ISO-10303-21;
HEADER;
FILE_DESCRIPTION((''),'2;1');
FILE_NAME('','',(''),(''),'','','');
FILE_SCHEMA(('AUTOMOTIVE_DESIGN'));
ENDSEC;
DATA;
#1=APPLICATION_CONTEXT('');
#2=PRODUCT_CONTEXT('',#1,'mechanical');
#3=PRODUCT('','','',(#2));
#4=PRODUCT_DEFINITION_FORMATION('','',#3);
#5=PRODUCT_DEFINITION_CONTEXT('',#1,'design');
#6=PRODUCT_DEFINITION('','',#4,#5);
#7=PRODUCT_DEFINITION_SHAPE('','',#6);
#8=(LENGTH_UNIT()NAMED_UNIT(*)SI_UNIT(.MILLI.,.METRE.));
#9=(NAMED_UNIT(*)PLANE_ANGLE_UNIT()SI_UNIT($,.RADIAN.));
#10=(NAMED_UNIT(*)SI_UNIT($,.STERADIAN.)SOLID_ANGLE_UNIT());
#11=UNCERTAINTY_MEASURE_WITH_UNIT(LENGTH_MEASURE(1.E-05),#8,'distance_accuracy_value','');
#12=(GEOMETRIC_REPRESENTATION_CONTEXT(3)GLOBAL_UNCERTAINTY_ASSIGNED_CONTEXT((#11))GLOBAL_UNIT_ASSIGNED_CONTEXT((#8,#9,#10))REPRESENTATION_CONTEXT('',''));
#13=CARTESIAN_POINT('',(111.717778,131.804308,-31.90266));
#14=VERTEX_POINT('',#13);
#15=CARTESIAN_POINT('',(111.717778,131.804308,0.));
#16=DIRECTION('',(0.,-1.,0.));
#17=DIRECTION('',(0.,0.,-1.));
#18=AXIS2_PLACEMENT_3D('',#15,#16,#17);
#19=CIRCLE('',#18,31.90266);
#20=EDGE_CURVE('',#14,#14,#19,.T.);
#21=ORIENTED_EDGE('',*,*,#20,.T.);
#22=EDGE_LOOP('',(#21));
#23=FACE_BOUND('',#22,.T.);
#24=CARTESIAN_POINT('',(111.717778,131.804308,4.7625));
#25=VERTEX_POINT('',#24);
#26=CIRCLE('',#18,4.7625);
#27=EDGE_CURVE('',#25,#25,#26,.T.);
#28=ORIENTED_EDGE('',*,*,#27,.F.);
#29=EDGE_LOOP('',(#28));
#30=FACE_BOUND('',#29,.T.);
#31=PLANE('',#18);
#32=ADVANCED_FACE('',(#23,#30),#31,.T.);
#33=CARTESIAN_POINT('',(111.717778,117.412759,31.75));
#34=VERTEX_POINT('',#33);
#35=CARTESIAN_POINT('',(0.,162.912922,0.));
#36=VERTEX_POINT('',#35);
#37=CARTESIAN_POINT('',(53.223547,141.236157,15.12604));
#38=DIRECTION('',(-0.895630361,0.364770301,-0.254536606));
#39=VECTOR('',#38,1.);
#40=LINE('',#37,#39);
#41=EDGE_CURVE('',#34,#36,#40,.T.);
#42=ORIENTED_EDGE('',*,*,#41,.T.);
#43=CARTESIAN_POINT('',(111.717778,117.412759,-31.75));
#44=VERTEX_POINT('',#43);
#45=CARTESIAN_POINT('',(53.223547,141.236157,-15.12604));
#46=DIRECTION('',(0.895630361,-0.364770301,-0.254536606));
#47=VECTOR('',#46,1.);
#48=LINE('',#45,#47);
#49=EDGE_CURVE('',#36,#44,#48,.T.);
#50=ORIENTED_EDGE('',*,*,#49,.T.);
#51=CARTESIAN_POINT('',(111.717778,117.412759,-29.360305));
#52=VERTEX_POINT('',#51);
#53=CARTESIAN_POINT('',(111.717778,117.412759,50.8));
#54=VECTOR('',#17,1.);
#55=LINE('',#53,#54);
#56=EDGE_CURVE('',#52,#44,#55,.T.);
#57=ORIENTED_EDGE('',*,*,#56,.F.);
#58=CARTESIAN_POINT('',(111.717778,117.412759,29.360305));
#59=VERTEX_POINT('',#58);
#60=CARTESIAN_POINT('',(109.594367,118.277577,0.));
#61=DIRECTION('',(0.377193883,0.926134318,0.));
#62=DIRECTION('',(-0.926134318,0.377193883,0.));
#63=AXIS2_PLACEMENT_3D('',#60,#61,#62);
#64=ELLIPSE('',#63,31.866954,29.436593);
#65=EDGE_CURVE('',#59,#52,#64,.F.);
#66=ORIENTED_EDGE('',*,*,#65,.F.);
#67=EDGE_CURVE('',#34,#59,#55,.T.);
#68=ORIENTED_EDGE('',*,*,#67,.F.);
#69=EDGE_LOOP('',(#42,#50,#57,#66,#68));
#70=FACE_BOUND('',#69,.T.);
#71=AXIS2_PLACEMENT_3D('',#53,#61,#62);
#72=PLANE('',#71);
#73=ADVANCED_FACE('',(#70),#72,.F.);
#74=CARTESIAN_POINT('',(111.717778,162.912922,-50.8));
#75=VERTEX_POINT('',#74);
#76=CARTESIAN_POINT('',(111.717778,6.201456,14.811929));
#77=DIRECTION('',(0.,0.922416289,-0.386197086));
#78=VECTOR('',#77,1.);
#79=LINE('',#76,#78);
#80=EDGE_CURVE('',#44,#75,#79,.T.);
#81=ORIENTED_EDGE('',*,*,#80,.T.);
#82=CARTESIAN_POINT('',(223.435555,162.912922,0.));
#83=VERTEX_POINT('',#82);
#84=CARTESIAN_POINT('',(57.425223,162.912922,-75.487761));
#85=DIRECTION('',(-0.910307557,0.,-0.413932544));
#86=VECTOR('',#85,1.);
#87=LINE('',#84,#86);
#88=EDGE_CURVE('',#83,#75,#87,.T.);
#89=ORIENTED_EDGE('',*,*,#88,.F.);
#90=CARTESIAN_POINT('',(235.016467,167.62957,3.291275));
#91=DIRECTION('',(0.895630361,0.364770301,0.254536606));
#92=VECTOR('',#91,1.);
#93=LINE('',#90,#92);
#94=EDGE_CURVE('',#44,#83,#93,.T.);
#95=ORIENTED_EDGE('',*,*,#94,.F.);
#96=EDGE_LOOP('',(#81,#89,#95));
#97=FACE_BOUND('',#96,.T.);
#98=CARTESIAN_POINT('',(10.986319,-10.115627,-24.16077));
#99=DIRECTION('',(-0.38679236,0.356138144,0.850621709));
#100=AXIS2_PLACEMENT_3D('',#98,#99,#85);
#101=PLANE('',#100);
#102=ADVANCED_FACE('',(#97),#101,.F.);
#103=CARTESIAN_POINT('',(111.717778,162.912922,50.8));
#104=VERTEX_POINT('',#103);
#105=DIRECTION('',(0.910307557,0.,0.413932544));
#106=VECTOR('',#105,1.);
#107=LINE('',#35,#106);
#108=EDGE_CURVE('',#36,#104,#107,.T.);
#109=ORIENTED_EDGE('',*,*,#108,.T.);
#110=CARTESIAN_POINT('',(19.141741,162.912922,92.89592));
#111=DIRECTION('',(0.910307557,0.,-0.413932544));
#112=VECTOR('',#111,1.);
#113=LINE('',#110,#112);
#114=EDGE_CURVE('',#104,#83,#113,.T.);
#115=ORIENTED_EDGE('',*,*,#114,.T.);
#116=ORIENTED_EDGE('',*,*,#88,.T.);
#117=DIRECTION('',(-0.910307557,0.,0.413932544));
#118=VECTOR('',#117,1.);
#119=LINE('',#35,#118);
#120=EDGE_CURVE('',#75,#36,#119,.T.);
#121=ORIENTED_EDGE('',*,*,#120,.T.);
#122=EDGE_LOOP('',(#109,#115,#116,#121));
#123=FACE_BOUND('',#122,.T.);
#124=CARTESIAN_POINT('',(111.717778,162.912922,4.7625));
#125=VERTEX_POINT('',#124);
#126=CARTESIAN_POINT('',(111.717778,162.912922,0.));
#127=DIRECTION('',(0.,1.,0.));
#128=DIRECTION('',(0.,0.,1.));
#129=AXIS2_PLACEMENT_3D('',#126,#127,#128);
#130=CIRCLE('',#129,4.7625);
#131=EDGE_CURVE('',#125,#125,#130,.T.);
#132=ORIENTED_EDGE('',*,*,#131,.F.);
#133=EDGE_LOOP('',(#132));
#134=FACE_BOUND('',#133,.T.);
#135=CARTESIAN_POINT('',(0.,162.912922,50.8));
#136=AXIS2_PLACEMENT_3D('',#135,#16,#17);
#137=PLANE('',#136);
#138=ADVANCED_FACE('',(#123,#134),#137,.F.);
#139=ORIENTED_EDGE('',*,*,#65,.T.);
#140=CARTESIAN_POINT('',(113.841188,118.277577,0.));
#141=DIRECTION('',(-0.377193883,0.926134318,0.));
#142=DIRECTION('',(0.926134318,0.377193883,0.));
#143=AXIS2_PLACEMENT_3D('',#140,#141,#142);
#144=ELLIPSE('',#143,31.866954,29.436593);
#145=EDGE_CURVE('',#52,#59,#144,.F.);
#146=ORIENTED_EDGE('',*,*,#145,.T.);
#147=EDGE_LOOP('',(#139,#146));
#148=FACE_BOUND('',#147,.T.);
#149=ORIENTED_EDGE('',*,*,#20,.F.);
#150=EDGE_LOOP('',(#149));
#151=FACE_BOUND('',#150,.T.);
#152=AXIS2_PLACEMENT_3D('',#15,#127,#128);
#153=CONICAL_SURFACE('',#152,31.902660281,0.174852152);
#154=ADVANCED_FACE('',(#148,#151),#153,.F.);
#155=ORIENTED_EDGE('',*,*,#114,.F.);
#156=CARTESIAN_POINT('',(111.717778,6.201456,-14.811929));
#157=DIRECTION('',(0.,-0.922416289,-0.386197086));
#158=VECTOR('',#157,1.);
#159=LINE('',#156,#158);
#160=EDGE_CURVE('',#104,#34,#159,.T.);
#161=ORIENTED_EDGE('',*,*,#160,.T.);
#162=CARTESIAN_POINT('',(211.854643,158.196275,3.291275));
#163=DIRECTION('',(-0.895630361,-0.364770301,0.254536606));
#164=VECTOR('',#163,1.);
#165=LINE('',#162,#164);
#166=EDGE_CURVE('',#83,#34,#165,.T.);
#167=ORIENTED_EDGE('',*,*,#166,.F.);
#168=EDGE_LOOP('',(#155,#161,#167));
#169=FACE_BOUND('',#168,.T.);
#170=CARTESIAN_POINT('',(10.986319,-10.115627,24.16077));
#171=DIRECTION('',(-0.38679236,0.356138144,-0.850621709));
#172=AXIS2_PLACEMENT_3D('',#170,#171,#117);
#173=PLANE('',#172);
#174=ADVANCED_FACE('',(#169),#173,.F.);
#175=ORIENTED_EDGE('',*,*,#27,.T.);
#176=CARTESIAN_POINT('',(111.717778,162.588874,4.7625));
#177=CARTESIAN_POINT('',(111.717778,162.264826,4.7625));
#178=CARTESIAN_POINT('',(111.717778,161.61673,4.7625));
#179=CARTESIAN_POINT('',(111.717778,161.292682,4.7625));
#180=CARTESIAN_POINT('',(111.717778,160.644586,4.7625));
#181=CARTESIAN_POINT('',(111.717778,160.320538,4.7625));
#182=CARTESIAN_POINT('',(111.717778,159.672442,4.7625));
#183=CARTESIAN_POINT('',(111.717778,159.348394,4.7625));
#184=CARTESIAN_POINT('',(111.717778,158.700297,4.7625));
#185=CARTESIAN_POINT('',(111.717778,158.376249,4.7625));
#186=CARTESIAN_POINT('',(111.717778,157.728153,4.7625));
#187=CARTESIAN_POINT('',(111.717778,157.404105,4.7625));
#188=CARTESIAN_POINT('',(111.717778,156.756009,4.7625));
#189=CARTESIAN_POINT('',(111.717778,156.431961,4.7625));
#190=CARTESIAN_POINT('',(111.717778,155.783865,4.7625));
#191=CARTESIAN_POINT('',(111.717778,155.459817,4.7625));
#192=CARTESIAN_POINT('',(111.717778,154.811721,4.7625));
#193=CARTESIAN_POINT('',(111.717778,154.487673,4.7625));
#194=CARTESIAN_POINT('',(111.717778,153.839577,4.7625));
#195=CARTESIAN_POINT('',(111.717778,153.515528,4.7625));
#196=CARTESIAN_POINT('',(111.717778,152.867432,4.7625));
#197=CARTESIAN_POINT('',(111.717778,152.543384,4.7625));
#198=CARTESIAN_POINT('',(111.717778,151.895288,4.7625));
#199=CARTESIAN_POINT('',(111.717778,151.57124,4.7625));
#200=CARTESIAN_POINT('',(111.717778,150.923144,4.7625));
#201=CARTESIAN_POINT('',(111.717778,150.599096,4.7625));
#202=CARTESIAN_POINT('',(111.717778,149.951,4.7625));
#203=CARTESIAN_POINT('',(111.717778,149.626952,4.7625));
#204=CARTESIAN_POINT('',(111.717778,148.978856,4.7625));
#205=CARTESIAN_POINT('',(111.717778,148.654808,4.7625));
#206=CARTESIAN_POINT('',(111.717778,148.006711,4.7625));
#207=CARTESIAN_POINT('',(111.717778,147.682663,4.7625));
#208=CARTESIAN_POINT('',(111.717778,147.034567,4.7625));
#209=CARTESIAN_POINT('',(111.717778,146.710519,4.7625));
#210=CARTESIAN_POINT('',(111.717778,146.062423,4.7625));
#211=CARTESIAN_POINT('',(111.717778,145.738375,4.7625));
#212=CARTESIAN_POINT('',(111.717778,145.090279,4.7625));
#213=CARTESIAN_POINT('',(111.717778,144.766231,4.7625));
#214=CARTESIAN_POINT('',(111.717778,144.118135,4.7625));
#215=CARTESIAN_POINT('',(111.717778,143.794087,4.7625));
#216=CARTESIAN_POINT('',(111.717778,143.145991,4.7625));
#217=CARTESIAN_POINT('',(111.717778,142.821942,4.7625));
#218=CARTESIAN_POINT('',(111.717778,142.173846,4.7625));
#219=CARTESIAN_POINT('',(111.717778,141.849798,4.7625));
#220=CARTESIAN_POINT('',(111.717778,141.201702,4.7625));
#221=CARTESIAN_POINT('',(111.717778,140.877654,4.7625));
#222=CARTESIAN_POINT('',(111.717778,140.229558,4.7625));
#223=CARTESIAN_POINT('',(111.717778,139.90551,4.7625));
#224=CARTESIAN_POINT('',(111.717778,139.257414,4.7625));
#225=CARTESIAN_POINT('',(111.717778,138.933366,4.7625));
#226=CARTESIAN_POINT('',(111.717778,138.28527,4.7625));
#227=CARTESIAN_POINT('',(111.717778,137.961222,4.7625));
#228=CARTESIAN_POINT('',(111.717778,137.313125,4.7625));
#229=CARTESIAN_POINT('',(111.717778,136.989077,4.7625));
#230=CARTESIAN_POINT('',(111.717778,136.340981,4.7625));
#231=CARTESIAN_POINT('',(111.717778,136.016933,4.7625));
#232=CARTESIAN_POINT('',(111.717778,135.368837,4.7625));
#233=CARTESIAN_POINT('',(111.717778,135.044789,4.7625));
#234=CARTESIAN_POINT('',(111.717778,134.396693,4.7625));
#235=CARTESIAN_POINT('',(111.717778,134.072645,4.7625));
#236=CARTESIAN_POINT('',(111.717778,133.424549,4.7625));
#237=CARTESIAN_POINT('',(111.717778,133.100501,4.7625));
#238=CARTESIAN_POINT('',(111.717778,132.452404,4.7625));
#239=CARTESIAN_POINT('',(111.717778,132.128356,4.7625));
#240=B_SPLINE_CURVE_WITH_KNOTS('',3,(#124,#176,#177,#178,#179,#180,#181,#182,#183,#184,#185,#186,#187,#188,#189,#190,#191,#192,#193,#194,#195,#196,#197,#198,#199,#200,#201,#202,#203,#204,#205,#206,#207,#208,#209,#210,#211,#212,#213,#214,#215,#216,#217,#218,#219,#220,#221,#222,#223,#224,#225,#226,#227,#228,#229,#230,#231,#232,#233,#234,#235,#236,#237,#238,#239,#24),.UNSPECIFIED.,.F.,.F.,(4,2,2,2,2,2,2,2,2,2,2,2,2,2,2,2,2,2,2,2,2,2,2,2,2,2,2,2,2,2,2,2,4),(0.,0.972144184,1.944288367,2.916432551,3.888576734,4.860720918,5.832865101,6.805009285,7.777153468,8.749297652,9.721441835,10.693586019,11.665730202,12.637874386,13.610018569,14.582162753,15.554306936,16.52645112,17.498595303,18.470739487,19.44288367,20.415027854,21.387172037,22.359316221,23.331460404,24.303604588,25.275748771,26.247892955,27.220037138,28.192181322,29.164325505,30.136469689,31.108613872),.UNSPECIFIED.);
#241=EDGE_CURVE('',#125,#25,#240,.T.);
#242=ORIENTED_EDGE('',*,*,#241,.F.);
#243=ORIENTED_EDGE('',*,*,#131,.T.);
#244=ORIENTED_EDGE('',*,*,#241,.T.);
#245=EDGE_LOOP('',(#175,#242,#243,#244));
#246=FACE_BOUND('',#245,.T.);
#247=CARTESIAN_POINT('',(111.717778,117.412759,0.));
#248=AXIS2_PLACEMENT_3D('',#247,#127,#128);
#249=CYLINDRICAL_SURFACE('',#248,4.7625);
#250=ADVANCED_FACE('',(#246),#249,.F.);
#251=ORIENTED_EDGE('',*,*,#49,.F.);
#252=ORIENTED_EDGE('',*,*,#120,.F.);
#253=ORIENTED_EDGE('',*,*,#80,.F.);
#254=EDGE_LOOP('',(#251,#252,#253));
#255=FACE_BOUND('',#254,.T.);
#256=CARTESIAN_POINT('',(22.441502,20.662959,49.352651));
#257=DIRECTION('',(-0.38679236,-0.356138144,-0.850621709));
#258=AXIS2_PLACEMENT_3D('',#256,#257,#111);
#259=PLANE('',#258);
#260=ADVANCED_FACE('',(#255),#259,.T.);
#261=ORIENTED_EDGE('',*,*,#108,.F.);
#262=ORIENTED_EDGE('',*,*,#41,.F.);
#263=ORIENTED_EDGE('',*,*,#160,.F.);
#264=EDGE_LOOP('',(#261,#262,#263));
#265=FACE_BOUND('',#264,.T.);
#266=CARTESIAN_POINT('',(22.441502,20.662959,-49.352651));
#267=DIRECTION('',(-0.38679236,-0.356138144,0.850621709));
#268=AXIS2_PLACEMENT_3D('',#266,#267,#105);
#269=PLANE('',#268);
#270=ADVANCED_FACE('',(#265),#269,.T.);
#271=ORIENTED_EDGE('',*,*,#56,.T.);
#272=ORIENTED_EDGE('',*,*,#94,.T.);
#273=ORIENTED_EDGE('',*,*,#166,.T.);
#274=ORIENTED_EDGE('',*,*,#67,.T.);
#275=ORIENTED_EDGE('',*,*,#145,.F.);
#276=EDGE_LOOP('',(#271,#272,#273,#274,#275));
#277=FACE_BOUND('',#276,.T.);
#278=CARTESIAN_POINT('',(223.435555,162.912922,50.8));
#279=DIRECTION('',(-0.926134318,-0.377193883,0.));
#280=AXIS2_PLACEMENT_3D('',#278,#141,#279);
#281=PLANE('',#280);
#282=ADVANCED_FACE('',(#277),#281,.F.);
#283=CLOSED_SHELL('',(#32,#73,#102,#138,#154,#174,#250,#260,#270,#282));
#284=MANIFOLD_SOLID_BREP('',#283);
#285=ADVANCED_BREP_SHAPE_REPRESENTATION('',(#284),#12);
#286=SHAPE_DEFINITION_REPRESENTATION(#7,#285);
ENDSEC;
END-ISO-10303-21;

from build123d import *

# Parameters (mm, degrees)
BOSS_EXTRUDE1_DEPTH = 50.8
CUT_EXTRUDE1_REACH  = 267.827
SKETCH3_W           = 270.689015678
SKETCH3_H           = 127.641974873
SKETCH4_W           = 182.593572116
SKETCH4_H           = 90.656556142
CUT_EXTRUDE2_DEPTH  = 276.287495976
SKETCH5_R           = 4.7625
CUT_EXTRUDE3_DEPTH  = 234.611541089


# Read off the part's stored shape, not the designer's step: Cavity1
with BuildPart() as part:
    # Sketch1 → Boss-Extrude1 (new body)
    with BuildSketch(Plane.XY):
        Polygon((0, 162.912922238), (223.435555158, 162.912922238), (111.717777579, 117.412759364), align=None)
    boss_extrude1 = extrude(amount=BOSS_EXTRUDE1_DEPTH)

    # Sketch3 → Cut-Extrude1 (cut, up to next)
    with BuildSketch(Plane(origin=(22.441501566, 20.662959115, -49.352651191), x_dir=(0.9221668342969159, -0.1493780822790374, 0.35678357341312894), z_dir=(-0.38679235995919625, -0.3561381441534573, 0.8506217094314763)), mode=Mode.PRIVATE) as cut_extrude1_sk1:
        with Locations((94.443721281, 144.982742911)):
            Rectangle(SKETCH3_W, SKETCH3_H)
    cut_extrude1_tool1 = extrude(cut_extrude1_sk1.sketch, amount=CUT_EXTRUDE1_REACH, mode=Mode.PRIVATE) & part.part
    cut_extrude1 = cut_extrude1_tool1.solids().sort_by_distance((109.534369, 140.289581, 40.33523))[0]
    add(cut_extrude1, mode=Mode.SUBTRACT)

    # Sketch4 → Cut-Extrude2 (cut, through all)
    with BuildSketch(Plane(origin=(10.986318642, -10.115626722, 24.160769733), x_dir=(0.9221668342969159, 0.14937808227903746, -0.35678357341312883), z_dir=(0.3867923599591962, -0.3561381441534575, 0.8506217094314763))):
        with Locations((161.909836557, 133.814028117)):
            Rectangle(SKETCH4_W, SKETCH4_H)
    cut_extrude2 = extrude(amount=CUT_EXTRUDE2_DEPTH, mode=Mode.SUBTRACT)

    # Mirror1: Boss-Extrude1, Cut-Extrude1, Cut-Extrude2 across plane
    add(boss_extrude1.mirror(Plane.XY))
    add(cut_extrude1.mirror(Plane.XY), mode=Mode.SUBTRACT)
    add(cut_extrude2.mirror(Plane.XY), mode=Mode.SUBTRACT)

    # Sketch5 → Cut-Extrude3 (cut, through all)
    with BuildSketch(Plane(origin=(0, 162.912922238, 0), x_dir=(1, 0, 0), z_dir=(0, 1, 0))):
        with Locations(Location((111.717777579, 0, 0), (0, 0, 270))):
            Circle(SKETCH5_R)
    extrude(amount=-CUT_EXTRUDE3_DEPTH, mode=Mode.SUBTRACT)

    # Cavity1 outline → Cavity1 (revolve, cut)
    with BuildSketch(Plane(origin=(111.717777579, 0, 0), x_dir=(1, 0, 0), z_dir=(0, 0, 1))):
        Polygon((31.902660281, 131.804308366), (4.7625, 131.804308366), (4.7625, 117.412759364), (29.360304621, 117.412759364), align=None)
    revolve(axis=Axis((111.717777579, 0, 0), (0, 1, 0)), mode=Mode.SUBTRACT)


solid = part.part
